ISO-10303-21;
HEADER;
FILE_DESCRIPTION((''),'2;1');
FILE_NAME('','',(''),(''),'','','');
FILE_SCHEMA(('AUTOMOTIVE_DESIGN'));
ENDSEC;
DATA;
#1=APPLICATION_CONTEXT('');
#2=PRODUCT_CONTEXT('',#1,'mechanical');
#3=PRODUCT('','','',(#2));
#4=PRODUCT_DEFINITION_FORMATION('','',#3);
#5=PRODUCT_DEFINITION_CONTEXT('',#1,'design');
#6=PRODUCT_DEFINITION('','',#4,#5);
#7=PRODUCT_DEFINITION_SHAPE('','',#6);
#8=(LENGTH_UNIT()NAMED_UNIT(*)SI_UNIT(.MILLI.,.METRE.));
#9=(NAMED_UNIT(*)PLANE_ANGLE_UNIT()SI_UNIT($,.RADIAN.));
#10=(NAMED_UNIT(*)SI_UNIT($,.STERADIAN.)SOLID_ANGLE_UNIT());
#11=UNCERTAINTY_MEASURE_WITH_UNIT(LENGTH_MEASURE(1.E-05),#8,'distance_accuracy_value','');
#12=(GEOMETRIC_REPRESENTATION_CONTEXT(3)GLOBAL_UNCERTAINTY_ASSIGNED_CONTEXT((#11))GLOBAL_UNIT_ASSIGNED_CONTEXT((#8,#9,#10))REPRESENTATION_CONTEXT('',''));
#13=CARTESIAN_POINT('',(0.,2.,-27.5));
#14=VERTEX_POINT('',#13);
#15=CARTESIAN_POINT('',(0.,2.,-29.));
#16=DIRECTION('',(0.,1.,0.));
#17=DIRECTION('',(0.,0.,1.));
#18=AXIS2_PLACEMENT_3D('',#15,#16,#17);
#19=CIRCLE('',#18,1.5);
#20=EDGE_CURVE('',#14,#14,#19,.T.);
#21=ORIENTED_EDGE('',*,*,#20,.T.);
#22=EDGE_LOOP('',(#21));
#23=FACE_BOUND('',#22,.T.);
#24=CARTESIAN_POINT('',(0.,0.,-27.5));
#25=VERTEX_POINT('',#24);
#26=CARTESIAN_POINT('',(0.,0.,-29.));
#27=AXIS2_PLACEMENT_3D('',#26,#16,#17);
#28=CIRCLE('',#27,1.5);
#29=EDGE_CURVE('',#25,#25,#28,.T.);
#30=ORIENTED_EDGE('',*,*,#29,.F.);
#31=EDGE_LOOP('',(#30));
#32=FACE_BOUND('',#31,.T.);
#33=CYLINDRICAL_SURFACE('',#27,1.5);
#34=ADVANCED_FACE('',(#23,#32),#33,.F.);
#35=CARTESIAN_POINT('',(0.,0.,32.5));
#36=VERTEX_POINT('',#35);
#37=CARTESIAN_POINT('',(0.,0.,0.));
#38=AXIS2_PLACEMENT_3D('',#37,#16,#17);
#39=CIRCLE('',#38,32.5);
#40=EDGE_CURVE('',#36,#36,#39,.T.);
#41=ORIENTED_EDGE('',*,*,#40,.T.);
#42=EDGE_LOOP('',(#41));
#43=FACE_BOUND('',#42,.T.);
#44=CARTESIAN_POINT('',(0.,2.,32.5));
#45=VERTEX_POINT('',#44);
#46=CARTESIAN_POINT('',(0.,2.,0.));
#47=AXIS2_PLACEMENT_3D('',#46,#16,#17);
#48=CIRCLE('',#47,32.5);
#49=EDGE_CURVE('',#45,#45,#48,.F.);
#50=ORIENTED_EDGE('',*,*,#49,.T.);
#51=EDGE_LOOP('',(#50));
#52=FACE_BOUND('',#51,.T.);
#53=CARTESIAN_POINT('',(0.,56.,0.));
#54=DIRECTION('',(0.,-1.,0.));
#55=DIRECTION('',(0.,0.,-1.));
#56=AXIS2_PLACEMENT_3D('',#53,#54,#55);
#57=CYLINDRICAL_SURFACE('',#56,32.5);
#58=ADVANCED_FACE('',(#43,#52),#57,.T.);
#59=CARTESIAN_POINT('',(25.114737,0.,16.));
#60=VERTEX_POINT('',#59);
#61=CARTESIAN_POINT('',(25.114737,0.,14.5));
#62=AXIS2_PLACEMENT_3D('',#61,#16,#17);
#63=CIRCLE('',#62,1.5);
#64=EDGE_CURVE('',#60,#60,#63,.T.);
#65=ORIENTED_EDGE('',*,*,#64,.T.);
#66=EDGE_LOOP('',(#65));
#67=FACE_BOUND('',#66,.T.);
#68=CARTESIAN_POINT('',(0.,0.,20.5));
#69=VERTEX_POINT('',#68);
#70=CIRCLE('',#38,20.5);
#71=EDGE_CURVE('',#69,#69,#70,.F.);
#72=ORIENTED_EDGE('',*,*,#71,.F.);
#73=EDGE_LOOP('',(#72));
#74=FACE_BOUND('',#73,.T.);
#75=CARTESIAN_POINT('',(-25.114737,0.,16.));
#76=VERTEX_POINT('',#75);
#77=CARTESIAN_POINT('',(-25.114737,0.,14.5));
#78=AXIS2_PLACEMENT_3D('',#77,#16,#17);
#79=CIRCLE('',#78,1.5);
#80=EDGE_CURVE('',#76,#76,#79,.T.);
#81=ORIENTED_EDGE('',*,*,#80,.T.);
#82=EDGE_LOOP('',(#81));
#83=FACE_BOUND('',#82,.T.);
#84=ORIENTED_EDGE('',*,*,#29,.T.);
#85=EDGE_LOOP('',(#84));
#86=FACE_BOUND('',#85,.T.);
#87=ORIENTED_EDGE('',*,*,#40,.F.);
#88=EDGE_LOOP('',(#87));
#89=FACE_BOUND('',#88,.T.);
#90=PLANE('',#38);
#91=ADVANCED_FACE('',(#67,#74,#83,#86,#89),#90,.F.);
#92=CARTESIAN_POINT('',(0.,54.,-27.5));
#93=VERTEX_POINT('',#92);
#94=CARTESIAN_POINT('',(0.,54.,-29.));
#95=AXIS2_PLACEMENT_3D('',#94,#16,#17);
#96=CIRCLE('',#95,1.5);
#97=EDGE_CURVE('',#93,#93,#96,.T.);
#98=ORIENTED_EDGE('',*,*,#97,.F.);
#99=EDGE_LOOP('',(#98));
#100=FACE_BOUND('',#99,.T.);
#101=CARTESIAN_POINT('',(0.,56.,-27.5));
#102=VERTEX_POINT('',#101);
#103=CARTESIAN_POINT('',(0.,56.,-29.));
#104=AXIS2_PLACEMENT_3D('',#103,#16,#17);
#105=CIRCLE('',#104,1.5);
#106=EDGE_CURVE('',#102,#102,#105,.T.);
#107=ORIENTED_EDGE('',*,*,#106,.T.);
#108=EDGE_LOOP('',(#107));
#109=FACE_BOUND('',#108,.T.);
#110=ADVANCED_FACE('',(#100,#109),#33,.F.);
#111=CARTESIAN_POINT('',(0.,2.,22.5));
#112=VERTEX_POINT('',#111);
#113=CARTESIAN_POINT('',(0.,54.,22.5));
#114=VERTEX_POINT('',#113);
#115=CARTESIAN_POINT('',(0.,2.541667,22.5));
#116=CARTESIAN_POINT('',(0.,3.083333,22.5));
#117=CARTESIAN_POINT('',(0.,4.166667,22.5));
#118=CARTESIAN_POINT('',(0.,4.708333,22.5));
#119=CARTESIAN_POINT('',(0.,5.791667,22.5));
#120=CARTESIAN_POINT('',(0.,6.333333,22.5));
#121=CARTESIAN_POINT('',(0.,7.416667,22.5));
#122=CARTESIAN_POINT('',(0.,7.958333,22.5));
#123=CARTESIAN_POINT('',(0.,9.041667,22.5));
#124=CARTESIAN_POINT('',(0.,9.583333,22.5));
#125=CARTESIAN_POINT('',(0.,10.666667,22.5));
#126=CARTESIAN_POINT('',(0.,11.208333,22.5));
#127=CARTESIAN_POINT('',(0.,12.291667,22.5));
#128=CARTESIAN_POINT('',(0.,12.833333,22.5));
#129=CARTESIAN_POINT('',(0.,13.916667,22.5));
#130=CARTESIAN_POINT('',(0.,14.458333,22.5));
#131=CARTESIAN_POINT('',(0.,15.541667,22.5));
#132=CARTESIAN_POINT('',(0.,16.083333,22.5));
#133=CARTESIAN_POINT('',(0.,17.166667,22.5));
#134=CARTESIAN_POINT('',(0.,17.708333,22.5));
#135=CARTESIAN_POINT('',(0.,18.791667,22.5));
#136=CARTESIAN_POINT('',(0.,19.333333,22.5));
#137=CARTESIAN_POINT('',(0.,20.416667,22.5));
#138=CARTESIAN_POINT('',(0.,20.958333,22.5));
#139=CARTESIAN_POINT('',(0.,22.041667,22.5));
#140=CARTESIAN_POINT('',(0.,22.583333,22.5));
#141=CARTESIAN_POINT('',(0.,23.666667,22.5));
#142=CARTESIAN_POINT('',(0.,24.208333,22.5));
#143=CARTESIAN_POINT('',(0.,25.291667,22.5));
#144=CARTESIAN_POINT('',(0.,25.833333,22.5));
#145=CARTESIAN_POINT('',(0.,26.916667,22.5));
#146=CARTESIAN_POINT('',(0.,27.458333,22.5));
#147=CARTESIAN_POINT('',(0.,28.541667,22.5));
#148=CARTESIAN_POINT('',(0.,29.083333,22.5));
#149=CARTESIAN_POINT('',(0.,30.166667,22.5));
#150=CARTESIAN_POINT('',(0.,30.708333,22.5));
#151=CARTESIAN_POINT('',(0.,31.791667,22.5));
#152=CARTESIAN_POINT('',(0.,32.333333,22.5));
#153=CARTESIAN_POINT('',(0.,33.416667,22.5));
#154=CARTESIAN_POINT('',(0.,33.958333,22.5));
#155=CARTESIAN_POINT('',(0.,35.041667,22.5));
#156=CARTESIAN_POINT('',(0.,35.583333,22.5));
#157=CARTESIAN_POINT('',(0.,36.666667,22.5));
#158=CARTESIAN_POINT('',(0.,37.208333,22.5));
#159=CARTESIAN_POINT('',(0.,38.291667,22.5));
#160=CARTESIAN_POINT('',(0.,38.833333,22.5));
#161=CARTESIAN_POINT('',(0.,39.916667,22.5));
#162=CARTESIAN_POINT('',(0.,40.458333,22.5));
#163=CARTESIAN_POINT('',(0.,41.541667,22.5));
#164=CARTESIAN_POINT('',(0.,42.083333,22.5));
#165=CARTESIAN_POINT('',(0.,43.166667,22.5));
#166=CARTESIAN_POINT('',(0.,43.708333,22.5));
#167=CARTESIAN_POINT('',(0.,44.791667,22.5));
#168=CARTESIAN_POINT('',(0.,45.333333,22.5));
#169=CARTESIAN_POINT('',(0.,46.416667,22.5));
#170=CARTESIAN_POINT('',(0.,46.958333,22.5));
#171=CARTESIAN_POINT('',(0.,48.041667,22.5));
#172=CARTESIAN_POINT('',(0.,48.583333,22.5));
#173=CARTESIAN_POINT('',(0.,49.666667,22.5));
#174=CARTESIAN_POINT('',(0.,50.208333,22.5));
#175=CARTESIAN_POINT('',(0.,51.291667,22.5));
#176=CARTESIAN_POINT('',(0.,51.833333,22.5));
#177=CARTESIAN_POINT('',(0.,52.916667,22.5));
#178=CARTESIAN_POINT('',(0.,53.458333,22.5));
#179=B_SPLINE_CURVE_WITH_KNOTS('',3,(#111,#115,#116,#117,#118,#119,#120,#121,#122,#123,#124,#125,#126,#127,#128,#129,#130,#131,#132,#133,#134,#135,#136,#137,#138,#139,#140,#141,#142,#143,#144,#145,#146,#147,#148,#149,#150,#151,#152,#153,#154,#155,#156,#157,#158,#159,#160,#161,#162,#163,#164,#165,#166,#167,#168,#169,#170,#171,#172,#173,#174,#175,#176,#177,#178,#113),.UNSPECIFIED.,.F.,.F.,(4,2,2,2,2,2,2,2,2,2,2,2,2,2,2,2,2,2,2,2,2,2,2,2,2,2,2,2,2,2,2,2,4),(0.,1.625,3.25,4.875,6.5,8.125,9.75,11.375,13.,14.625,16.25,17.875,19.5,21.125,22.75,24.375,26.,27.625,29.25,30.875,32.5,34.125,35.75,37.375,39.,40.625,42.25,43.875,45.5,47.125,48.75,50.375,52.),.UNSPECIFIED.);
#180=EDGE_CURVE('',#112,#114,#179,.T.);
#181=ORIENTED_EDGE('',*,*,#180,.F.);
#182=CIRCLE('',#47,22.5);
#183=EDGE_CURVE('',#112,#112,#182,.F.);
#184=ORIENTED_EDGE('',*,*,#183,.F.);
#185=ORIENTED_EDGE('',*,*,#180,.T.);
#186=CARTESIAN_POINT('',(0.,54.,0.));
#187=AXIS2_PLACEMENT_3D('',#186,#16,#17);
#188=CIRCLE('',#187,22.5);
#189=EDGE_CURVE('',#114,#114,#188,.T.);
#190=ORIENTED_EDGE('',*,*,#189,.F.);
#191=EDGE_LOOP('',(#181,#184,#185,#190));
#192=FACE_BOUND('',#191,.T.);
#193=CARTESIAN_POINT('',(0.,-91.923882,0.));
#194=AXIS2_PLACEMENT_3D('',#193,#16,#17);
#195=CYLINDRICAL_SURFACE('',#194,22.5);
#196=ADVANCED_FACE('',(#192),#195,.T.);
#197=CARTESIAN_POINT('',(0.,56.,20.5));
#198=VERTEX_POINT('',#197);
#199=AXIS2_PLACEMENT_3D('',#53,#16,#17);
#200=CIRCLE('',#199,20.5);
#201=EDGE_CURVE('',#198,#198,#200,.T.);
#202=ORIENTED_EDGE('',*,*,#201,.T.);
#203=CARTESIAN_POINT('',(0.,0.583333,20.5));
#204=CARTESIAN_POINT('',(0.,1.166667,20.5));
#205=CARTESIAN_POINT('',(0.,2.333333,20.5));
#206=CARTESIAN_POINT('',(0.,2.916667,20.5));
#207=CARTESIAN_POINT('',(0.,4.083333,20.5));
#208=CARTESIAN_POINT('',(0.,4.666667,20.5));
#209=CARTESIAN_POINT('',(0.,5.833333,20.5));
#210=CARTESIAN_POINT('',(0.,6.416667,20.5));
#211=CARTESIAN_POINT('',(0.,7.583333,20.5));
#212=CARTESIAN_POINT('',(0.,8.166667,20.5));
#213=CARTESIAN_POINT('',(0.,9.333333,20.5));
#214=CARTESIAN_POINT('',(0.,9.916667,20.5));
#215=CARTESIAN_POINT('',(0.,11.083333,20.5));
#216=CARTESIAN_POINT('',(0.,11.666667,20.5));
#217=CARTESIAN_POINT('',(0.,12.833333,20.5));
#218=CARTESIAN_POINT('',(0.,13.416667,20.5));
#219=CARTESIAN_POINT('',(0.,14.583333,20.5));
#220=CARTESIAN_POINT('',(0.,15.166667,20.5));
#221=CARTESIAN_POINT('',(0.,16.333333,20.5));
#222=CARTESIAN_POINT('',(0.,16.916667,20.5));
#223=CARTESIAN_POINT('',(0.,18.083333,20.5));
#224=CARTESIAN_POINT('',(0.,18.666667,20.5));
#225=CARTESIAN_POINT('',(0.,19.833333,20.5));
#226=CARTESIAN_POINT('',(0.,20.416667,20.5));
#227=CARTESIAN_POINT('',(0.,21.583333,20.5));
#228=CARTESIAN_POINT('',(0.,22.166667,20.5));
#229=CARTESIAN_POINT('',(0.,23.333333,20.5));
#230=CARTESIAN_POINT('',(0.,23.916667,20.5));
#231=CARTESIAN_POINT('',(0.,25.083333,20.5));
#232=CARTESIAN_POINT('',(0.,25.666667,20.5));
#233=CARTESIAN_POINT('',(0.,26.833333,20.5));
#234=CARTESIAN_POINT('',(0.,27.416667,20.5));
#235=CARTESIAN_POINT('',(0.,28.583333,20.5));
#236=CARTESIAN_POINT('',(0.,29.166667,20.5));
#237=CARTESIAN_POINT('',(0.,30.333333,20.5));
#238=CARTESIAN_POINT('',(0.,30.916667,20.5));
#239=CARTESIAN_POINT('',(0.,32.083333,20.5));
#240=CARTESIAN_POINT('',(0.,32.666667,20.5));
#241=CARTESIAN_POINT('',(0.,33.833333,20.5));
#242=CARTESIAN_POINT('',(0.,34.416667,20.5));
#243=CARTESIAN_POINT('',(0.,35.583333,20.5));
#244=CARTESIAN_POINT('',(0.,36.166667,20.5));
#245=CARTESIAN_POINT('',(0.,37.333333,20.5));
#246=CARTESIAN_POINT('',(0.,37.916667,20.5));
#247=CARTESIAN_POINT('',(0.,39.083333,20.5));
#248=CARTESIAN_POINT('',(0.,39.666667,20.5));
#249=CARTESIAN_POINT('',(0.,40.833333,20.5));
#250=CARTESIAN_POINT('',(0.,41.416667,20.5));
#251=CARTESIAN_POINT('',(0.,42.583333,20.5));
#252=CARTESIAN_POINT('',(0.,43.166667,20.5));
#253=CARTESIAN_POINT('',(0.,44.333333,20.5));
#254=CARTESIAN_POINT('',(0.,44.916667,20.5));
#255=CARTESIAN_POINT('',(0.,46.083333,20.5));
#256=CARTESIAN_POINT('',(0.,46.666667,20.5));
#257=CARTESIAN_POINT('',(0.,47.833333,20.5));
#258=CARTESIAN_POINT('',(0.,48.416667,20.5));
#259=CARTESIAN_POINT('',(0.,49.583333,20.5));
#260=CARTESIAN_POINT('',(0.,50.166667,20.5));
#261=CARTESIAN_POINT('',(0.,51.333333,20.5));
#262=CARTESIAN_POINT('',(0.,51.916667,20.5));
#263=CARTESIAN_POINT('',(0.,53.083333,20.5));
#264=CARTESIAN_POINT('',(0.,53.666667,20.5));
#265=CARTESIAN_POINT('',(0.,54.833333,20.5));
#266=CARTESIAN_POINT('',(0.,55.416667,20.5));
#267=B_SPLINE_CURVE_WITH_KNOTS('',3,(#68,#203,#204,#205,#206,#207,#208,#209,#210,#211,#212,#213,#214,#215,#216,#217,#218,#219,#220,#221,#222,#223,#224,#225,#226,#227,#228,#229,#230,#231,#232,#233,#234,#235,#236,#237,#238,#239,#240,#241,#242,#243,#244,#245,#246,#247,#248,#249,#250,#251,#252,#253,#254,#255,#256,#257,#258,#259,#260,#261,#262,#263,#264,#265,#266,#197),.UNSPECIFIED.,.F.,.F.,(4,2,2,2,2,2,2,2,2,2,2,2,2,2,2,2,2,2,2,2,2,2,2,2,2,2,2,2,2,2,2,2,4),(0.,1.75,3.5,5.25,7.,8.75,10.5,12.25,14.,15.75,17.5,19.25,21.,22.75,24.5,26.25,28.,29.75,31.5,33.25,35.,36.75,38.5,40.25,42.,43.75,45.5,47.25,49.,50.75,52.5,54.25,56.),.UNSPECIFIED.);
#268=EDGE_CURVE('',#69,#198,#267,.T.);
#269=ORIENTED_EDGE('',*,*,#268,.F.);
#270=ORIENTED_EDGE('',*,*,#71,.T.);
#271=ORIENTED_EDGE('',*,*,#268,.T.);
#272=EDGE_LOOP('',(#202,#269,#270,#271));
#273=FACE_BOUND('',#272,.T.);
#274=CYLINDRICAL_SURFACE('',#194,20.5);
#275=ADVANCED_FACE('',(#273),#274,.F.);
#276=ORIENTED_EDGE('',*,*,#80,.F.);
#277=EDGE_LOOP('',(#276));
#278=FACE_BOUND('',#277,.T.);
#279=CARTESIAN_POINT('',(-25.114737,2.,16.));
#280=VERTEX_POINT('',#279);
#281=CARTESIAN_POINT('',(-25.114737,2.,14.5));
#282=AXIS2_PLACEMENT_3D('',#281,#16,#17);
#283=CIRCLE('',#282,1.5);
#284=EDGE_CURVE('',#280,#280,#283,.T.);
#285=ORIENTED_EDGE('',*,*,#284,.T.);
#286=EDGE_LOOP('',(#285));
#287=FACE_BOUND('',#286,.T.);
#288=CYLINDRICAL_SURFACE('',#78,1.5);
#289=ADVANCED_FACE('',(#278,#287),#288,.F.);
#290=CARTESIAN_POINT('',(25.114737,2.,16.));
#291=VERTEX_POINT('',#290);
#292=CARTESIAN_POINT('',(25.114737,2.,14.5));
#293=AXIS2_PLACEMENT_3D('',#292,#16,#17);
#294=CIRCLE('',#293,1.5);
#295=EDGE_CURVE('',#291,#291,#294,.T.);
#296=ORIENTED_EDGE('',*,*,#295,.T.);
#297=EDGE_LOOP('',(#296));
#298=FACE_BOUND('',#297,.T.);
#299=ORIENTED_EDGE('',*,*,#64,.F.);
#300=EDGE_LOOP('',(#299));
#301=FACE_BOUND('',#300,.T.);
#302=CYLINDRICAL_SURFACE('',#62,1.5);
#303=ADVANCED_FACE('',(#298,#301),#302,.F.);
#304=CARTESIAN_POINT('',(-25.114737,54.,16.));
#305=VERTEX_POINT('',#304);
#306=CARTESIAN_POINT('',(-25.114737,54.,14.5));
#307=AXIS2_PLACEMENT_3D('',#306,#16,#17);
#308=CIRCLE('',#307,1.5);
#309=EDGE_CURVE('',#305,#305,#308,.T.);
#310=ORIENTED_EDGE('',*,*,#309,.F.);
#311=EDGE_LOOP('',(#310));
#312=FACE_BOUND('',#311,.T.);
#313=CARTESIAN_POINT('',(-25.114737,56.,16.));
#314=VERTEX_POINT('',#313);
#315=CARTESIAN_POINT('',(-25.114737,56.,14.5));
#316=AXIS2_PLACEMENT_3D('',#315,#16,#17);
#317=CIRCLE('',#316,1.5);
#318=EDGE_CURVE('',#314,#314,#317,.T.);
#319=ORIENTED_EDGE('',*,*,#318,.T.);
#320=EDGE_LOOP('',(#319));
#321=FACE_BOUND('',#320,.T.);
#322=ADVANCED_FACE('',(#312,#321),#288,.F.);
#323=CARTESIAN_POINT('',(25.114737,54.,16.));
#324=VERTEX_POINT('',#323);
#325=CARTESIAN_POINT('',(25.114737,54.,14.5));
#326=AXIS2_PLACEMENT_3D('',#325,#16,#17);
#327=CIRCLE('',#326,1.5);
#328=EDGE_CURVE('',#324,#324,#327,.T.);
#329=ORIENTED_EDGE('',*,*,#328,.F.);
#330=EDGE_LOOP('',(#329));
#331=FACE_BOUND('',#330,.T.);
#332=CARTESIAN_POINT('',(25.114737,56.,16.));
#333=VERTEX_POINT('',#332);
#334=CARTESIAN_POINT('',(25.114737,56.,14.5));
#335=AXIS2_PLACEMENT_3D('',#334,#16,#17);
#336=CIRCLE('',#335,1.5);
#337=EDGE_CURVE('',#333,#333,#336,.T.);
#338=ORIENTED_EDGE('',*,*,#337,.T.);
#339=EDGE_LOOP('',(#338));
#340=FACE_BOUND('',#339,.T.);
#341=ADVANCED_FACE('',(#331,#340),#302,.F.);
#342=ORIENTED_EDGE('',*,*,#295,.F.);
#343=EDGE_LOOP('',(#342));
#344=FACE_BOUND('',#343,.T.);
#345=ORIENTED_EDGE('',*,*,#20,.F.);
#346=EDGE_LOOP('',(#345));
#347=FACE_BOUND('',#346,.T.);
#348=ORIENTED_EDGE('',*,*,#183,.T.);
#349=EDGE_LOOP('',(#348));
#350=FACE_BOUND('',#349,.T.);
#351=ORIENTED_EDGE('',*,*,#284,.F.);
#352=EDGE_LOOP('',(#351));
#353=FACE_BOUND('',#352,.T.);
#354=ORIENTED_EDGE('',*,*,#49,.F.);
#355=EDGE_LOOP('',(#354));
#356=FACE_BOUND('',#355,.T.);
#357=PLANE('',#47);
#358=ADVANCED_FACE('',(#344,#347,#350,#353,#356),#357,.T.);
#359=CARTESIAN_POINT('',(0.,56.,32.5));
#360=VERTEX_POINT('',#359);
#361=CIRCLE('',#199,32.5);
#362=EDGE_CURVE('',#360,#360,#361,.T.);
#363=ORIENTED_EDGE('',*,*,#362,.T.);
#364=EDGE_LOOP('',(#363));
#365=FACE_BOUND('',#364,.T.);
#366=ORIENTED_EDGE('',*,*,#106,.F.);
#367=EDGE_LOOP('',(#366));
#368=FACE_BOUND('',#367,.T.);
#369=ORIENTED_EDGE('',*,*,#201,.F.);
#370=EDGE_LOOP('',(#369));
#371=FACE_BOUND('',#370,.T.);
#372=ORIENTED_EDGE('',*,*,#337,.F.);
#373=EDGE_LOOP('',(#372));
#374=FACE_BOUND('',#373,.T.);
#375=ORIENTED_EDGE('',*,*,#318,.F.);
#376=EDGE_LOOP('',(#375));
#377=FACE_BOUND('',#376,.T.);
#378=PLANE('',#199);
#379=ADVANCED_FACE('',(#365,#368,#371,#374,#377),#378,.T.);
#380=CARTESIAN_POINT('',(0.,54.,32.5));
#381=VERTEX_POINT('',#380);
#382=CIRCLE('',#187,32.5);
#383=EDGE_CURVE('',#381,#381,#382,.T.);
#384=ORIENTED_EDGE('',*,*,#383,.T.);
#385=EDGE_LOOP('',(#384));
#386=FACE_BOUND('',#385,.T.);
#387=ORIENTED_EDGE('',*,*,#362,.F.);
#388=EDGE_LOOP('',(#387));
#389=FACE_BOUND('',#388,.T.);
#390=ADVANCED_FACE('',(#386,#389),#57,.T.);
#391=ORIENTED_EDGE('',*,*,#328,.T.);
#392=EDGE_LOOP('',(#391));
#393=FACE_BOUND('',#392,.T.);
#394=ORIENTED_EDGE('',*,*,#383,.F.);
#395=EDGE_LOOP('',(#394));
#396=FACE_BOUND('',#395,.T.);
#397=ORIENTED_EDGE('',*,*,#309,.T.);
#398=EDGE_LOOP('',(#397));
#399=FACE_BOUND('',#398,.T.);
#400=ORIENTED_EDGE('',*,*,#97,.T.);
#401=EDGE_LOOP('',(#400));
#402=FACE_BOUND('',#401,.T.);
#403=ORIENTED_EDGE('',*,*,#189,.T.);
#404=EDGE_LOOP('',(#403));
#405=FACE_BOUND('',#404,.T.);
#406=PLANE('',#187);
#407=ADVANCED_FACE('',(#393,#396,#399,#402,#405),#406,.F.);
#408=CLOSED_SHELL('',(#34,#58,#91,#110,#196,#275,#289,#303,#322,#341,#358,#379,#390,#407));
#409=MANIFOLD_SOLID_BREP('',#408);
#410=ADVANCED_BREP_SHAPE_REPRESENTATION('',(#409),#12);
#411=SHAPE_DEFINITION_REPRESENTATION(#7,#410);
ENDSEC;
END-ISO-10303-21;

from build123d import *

# Parameters (mm, degrees)
SKETCH1_R           = 32.5
BOSS_EXTRUDE1_DEPTH = 56
CUT_EXTRUDE4_START  = -54
SKETCH6_R           = 32.5
SKETCH6_R_2         = 22.5
CUT_EXTRUDE4_DEPTH  = 52
SKETCH2_R           = 1.5
CUT_EXTRUDE2_DEPTH  = 73.446532008
SHELL1_OUTLINE_R    = 20.5
SHELL1_DEPTH        = 56


# Read off the part's stored shape, not the designer's step: Shell1
with BuildPart() as part:
    # Sketch1 → Boss-Extrude1 (new body)
    with BuildSketch(Plane(origin=(0, 0, 0), x_dir=(1, 0, 0), z_dir=(0, 1, 0))):
        with Locations(Location((0, 0, 0), (0, 0, 270))):
            Circle(SKETCH1_R)
    extrude(amount=BOSS_EXTRUDE1_DEPTH)

    # Sketch6 → Cut-Extrude4 (cut)
    with BuildSketch(Plane(origin=(0, 56, 0), x_dir=(1, 0, 0), z_dir=(0, 1, 0)).offset(CUT_EXTRUDE4_START)):
        with Locations(Location((0, 0, 0), (0, 0, 270))):
            Circle(SKETCH6_R)
        with Locations(Location((0, 0, 0), (0, 0, 270))):
            Circle(SKETCH6_R_2, mode=Mode.SUBTRACT)
    extrude(amount=CUT_EXTRUDE4_DEPTH, mode=Mode.SUBTRACT)

    # Sketch2 → Cut-Extrude2 (cut, through all)
    with BuildSketch(Plane(origin=(0, 56, 0), x_dir=(1, 0, 0), z_dir=(0, 1, 0))):
        with Locations(Location((0, 29, 0), (0, 0, 270))):
            Circle(SKETCH2_R)
        with Locations(Location((-25.11473671, -14.5, 0), (0, 0, 270))):
            Circle(SKETCH2_R)
        with Locations(Location((25.11473671, -14.5, 0), (0, 0, 270))):
            Circle(SKETCH2_R)
    extrude(amount=-CUT_EXTRUDE2_DEPTH, mode=Mode.SUBTRACT)

    # Shell1 outline → Shell1 (cut)
    with BuildSketch(Plane(origin=(0, 0, 0), x_dir=(1, 0, 0), z_dir=(0, 1, 0))):
        Circle(SHELL1_OUTLINE_R)
    extrude(amount=SHELL1_DEPTH, mode=Mode.SUBTRACT)


solid = part.part
